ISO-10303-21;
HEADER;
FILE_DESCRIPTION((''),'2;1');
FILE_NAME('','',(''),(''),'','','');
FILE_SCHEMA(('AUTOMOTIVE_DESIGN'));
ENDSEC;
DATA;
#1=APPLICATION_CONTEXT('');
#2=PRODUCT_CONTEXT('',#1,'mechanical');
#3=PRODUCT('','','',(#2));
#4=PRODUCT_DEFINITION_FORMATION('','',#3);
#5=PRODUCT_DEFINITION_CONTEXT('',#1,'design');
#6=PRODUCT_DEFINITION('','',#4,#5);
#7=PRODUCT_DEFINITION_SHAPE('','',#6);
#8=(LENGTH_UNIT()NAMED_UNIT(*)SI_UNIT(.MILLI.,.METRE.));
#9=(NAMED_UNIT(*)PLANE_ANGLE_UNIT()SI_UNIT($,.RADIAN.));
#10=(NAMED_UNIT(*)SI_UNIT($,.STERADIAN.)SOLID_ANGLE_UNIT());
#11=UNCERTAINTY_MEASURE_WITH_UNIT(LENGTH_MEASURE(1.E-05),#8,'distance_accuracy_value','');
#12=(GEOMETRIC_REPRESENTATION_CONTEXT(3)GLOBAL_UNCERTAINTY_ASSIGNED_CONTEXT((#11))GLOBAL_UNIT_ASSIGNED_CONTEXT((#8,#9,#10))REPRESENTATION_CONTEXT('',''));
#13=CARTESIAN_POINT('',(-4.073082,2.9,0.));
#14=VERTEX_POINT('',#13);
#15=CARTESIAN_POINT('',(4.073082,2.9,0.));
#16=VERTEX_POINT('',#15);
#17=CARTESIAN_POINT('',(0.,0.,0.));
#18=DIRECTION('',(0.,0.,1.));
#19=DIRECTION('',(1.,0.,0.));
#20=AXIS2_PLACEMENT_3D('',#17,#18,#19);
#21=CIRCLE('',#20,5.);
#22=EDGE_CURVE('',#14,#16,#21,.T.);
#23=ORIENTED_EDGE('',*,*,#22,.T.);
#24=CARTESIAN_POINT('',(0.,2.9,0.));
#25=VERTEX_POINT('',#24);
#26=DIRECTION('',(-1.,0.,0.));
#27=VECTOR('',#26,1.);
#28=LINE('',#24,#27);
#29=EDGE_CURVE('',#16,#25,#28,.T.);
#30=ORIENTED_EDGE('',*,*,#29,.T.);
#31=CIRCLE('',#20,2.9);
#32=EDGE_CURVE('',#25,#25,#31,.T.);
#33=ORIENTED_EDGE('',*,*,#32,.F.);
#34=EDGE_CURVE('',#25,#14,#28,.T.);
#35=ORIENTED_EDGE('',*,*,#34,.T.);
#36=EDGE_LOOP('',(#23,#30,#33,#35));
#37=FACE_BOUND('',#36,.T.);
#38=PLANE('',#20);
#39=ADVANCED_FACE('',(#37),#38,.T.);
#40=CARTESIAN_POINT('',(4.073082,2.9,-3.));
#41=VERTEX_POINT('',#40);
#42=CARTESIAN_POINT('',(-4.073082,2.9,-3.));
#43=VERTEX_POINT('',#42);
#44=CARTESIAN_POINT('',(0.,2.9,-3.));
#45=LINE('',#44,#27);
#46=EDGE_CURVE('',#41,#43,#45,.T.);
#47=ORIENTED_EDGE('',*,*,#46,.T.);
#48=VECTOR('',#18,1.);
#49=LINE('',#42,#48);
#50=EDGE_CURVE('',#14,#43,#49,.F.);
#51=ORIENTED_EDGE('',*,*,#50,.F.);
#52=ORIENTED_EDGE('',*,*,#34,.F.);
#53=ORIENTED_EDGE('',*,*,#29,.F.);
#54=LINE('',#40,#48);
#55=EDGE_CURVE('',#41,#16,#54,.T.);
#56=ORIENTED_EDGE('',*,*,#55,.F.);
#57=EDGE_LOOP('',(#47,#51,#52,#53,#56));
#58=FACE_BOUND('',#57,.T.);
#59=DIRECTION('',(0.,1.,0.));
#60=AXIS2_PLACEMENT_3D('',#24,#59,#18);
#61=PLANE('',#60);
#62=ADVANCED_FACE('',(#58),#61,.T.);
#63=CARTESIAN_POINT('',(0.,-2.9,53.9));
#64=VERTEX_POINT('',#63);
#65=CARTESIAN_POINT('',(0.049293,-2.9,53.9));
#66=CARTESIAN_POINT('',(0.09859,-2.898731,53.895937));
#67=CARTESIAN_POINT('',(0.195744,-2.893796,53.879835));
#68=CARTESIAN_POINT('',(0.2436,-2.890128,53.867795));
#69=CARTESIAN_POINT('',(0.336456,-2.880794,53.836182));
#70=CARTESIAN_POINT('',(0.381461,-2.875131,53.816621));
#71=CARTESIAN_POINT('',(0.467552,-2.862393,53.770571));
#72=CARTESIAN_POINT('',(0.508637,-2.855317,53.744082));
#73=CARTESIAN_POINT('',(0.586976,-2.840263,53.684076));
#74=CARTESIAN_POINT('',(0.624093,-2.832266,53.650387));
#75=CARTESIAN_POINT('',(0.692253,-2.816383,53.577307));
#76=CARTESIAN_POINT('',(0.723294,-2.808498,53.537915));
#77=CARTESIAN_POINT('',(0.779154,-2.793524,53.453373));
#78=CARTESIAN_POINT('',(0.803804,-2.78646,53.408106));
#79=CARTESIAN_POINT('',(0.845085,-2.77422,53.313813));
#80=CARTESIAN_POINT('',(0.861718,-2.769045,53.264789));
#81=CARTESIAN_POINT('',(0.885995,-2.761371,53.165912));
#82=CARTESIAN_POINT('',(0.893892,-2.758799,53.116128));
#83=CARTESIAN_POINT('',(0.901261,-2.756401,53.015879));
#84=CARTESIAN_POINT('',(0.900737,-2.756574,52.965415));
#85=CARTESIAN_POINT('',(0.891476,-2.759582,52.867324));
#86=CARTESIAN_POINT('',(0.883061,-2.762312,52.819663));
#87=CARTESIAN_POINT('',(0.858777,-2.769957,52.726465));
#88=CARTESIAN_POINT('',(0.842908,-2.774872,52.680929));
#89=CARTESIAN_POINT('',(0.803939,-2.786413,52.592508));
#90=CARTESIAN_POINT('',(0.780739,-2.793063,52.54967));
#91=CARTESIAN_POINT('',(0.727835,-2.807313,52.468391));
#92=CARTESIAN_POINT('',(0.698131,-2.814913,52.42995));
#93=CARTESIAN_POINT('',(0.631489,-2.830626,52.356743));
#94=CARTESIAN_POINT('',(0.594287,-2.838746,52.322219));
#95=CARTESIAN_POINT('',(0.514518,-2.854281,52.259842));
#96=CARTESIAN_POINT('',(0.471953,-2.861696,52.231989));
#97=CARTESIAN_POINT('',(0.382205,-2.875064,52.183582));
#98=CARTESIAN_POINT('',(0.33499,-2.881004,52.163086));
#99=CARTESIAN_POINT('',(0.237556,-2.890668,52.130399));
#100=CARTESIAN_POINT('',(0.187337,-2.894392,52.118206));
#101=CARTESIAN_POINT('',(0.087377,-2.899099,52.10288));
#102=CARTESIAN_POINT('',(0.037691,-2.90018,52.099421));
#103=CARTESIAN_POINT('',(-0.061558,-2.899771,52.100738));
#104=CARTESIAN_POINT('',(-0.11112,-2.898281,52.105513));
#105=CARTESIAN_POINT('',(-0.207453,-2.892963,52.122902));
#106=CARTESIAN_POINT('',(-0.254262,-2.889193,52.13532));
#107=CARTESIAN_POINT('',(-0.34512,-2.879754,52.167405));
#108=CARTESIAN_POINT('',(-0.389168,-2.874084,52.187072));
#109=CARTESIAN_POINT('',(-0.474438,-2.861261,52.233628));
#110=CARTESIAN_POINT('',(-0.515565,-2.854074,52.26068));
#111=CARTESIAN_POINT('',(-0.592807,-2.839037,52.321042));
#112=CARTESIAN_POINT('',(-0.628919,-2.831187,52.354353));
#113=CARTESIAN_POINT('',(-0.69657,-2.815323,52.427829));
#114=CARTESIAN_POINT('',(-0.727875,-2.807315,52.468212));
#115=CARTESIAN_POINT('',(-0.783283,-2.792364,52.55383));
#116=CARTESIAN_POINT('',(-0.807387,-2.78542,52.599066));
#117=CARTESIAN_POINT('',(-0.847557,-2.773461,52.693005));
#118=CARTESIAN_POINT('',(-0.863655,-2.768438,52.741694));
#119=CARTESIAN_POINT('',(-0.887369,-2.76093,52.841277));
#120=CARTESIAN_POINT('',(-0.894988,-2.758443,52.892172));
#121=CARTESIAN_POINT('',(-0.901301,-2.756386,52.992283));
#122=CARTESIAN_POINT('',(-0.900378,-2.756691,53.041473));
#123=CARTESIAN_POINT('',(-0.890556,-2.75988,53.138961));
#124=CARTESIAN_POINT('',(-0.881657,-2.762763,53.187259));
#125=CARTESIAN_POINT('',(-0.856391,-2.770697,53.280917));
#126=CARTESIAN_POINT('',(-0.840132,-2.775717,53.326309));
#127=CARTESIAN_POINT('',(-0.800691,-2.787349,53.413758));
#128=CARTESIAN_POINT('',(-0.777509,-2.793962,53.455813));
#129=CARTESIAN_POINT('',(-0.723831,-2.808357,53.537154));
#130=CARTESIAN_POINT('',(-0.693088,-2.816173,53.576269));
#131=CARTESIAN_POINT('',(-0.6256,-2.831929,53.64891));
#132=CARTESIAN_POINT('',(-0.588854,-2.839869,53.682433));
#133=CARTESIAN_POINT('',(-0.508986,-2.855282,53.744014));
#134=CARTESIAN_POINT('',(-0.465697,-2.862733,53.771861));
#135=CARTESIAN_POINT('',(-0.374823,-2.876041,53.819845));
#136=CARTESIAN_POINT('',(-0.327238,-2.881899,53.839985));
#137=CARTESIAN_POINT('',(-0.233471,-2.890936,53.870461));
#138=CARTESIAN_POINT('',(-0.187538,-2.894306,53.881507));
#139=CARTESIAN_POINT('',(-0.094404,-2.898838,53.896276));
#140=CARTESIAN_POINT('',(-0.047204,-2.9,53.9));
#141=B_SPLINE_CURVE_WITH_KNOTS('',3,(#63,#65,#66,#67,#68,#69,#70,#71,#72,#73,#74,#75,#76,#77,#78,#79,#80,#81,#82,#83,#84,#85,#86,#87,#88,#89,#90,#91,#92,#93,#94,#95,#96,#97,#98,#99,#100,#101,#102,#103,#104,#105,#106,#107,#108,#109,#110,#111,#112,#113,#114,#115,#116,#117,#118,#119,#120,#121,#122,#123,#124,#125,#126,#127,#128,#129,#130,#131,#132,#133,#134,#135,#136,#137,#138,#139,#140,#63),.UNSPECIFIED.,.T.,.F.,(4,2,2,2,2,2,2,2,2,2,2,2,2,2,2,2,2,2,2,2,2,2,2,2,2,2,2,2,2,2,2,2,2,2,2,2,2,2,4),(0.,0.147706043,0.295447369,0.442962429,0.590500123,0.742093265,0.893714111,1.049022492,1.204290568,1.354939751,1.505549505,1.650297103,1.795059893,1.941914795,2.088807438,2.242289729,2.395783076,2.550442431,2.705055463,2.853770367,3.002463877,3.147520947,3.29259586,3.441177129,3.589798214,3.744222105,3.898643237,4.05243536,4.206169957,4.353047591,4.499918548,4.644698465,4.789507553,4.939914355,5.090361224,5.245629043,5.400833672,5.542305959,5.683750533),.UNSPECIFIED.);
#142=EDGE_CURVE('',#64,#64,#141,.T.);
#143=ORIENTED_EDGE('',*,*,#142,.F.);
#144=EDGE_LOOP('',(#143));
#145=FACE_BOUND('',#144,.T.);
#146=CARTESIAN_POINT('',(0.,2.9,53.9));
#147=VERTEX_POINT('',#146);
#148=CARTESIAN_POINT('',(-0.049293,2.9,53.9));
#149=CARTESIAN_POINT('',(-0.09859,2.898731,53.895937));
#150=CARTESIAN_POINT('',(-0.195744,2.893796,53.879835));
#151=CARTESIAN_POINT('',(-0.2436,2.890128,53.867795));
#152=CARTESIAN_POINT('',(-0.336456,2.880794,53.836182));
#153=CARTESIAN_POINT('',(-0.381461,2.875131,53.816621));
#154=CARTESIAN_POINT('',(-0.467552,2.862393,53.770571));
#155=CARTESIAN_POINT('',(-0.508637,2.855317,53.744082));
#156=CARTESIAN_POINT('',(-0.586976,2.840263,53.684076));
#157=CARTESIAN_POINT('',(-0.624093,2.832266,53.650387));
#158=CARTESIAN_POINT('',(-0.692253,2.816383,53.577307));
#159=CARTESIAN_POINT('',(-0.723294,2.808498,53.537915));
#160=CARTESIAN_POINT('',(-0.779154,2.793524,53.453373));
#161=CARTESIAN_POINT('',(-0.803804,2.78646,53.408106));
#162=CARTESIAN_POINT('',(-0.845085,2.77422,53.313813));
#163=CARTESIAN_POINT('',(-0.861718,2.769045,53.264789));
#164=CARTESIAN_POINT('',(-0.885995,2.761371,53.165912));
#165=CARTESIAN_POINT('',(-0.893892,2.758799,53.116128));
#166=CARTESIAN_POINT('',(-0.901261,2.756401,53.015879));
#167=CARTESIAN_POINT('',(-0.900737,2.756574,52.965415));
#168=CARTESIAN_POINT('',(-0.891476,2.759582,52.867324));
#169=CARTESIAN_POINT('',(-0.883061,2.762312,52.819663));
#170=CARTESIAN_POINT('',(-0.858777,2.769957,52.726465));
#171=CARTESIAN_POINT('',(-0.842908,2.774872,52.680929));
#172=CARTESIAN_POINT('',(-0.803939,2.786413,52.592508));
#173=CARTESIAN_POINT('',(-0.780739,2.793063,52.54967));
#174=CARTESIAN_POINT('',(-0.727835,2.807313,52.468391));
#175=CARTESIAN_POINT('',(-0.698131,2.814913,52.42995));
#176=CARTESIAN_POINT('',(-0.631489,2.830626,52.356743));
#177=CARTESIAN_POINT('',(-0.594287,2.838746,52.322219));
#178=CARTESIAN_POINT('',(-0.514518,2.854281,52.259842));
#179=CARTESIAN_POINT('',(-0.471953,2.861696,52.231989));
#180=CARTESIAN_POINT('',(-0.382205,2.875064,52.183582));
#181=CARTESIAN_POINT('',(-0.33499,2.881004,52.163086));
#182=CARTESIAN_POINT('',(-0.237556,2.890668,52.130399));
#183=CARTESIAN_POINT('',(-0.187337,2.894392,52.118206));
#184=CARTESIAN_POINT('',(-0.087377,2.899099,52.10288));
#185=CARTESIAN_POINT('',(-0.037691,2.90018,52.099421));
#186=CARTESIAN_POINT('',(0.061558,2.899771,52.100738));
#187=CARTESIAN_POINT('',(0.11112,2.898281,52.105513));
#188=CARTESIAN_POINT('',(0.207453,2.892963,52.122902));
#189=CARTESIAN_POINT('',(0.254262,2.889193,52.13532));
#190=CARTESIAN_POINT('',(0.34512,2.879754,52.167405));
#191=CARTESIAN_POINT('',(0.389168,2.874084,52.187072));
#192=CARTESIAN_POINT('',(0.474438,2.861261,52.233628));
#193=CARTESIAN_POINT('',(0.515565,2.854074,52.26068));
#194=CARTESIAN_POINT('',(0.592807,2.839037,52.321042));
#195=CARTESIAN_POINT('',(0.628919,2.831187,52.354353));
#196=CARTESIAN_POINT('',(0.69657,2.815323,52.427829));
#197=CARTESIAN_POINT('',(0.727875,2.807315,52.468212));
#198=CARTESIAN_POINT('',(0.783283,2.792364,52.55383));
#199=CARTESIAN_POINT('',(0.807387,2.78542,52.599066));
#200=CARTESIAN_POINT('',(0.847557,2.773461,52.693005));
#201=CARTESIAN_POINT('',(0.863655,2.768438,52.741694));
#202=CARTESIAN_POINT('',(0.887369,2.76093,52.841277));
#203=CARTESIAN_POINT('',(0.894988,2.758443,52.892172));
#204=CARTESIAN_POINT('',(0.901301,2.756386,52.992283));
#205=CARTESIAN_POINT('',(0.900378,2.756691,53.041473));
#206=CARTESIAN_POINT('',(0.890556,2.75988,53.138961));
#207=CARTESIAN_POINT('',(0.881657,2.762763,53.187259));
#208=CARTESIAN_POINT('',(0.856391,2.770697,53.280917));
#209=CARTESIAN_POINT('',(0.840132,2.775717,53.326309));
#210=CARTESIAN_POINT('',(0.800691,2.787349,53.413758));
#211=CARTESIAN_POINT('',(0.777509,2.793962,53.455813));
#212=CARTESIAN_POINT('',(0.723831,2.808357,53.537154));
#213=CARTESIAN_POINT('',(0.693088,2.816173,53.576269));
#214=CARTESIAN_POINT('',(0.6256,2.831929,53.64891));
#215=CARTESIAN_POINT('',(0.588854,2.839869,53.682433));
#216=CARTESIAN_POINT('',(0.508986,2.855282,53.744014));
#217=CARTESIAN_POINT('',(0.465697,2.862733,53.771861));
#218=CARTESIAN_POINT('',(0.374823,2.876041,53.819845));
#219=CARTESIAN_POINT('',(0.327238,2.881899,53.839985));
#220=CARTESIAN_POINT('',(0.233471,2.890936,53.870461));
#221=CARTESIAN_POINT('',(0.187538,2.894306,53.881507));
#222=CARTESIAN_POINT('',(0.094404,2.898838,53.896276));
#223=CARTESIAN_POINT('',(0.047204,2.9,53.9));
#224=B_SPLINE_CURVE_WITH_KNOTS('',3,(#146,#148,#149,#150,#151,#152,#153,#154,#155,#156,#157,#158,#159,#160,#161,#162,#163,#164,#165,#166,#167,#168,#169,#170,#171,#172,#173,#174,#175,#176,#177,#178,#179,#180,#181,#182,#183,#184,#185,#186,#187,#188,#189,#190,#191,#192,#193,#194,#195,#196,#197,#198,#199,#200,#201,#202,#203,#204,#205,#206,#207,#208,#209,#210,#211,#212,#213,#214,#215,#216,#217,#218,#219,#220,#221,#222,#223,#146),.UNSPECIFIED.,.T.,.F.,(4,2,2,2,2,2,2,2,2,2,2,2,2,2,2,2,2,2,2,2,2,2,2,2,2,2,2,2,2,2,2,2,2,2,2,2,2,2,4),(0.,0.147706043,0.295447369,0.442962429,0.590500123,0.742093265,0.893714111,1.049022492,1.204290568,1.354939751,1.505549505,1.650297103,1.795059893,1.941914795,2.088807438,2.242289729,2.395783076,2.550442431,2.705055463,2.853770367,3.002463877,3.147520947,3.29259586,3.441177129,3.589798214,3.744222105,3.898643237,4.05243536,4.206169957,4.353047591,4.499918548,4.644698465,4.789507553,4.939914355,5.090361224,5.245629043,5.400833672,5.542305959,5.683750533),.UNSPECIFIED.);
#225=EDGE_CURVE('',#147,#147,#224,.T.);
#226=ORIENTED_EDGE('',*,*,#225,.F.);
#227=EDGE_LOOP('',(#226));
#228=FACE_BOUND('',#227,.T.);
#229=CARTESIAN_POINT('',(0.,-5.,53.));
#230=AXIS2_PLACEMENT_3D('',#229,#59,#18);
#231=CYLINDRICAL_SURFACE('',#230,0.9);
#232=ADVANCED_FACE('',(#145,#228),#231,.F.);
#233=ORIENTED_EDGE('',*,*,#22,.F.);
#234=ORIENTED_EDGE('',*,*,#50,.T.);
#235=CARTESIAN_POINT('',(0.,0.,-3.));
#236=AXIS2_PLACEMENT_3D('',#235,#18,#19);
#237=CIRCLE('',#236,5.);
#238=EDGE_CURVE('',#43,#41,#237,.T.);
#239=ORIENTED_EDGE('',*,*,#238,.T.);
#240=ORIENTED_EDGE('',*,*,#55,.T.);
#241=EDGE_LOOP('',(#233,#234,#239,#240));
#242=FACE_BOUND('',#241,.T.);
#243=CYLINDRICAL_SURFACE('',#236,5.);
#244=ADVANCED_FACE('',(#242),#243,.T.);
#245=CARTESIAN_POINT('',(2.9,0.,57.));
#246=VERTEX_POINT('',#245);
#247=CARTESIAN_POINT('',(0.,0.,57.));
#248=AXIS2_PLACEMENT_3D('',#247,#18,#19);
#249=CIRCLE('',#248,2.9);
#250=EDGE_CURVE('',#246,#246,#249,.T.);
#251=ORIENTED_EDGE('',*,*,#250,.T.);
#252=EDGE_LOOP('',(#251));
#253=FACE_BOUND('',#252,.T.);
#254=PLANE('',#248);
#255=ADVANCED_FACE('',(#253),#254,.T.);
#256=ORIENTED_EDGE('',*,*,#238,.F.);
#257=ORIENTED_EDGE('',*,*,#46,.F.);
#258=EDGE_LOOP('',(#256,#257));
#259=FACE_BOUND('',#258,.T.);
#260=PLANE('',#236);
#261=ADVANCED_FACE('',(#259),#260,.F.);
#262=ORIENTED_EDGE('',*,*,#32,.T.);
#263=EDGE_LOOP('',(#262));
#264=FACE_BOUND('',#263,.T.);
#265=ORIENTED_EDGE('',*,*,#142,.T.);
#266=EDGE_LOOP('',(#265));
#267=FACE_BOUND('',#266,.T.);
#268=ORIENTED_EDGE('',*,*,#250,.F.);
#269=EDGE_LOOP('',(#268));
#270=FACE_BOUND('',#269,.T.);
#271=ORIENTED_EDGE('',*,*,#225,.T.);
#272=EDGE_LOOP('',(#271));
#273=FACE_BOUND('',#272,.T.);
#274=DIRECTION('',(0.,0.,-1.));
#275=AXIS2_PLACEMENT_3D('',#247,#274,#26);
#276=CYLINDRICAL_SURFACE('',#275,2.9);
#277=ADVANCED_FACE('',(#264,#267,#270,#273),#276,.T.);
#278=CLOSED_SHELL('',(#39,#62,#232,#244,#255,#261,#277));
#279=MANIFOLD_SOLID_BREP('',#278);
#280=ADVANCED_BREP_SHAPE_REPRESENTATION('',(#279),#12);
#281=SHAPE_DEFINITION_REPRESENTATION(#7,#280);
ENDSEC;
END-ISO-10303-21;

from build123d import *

# Parameters (mm, degrees)
SKETCH1_R            = 2.9
BOSS_EXTRUDE1_DEPTH  = 57
BOSS_EXTRUDE2_START  = -3
SKETCH1_3_R          = 5
SKETCH1_3_R_2        = 2.9
BOSS_EXTRUDE2_DEPTH  = 3
INTERSECT1_START     = 2.9
INTERSECT1_OUTLINE_W = 12
INTERSECT1_OUTLINE_H = 3
INTERSECT1_DEPTH     = 2.1
SKETCH2_R            = 0.9
CUT_EXTRUDE1_DEPTH   = 58.761665488


# Read off the part's stored shape, not the designer's step: Intersect1
with BuildPart() as part:
    # Sketch1 → Boss-Extrude1 (new body)
    with BuildSketch(Plane.XY):
        with Locations(Location((0, 0, 0), (0, 0, 180))):
            Circle(SKETCH1_R)
    extrude(amount=BOSS_EXTRUDE1_DEPTH)

    # Sketch1<3> → Boss-Extrude2 (add)
    # profile 1 of 2: a face of its own
    with BuildSketch(Plane.XY.offset(BOSS_EXTRUDE2_START)):
        Circle(SKETCH1_3_R)
        with Locations(Location((0, 0, 0), (0, 0, 180))):
            Circle(SKETCH1_3_R_2, mode=Mode.SUBTRACT)
    # profile 2 of 2: a face of its own
    with BuildSketch(Plane.XY.offset(BOSS_EXTRUDE2_START)):
        with Locations(Location((0, 0, 0), (0, 0, 180))):
            Circle(SKETCH1_3_R_2)
    extrude(amount=BOSS_EXTRUDE2_DEPTH)

    # Intersect1 outline → Intersect1 (cut)
    with BuildSketch(Plane(origin=(0, 0, 0), x_dir=(1, 0, 0), z_dir=(0, 1, 0)).offset(INTERSECT1_START)):
        with Locations((0, 1.5)):
            Rectangle(INTERSECT1_OUTLINE_W, INTERSECT1_OUTLINE_H)
    extrude(amount=INTERSECT1_DEPTH, mode=Mode.SUBTRACT)

    # Sketch2 → Cut-Extrude1 (cut, through all)
    with BuildSketch(Plane(origin=(0, 2.9, 0), x_dir=(1, 0, 0), z_dir=(0, 1, 0))):
        with Locations(Location((0, -53, 0), (0, 0, 270))):
            Circle(SKETCH2_R)
    extrude(amount=-CUT_EXTRUDE1_DEPTH, mode=Mode.SUBTRACT)


solid = part.part
